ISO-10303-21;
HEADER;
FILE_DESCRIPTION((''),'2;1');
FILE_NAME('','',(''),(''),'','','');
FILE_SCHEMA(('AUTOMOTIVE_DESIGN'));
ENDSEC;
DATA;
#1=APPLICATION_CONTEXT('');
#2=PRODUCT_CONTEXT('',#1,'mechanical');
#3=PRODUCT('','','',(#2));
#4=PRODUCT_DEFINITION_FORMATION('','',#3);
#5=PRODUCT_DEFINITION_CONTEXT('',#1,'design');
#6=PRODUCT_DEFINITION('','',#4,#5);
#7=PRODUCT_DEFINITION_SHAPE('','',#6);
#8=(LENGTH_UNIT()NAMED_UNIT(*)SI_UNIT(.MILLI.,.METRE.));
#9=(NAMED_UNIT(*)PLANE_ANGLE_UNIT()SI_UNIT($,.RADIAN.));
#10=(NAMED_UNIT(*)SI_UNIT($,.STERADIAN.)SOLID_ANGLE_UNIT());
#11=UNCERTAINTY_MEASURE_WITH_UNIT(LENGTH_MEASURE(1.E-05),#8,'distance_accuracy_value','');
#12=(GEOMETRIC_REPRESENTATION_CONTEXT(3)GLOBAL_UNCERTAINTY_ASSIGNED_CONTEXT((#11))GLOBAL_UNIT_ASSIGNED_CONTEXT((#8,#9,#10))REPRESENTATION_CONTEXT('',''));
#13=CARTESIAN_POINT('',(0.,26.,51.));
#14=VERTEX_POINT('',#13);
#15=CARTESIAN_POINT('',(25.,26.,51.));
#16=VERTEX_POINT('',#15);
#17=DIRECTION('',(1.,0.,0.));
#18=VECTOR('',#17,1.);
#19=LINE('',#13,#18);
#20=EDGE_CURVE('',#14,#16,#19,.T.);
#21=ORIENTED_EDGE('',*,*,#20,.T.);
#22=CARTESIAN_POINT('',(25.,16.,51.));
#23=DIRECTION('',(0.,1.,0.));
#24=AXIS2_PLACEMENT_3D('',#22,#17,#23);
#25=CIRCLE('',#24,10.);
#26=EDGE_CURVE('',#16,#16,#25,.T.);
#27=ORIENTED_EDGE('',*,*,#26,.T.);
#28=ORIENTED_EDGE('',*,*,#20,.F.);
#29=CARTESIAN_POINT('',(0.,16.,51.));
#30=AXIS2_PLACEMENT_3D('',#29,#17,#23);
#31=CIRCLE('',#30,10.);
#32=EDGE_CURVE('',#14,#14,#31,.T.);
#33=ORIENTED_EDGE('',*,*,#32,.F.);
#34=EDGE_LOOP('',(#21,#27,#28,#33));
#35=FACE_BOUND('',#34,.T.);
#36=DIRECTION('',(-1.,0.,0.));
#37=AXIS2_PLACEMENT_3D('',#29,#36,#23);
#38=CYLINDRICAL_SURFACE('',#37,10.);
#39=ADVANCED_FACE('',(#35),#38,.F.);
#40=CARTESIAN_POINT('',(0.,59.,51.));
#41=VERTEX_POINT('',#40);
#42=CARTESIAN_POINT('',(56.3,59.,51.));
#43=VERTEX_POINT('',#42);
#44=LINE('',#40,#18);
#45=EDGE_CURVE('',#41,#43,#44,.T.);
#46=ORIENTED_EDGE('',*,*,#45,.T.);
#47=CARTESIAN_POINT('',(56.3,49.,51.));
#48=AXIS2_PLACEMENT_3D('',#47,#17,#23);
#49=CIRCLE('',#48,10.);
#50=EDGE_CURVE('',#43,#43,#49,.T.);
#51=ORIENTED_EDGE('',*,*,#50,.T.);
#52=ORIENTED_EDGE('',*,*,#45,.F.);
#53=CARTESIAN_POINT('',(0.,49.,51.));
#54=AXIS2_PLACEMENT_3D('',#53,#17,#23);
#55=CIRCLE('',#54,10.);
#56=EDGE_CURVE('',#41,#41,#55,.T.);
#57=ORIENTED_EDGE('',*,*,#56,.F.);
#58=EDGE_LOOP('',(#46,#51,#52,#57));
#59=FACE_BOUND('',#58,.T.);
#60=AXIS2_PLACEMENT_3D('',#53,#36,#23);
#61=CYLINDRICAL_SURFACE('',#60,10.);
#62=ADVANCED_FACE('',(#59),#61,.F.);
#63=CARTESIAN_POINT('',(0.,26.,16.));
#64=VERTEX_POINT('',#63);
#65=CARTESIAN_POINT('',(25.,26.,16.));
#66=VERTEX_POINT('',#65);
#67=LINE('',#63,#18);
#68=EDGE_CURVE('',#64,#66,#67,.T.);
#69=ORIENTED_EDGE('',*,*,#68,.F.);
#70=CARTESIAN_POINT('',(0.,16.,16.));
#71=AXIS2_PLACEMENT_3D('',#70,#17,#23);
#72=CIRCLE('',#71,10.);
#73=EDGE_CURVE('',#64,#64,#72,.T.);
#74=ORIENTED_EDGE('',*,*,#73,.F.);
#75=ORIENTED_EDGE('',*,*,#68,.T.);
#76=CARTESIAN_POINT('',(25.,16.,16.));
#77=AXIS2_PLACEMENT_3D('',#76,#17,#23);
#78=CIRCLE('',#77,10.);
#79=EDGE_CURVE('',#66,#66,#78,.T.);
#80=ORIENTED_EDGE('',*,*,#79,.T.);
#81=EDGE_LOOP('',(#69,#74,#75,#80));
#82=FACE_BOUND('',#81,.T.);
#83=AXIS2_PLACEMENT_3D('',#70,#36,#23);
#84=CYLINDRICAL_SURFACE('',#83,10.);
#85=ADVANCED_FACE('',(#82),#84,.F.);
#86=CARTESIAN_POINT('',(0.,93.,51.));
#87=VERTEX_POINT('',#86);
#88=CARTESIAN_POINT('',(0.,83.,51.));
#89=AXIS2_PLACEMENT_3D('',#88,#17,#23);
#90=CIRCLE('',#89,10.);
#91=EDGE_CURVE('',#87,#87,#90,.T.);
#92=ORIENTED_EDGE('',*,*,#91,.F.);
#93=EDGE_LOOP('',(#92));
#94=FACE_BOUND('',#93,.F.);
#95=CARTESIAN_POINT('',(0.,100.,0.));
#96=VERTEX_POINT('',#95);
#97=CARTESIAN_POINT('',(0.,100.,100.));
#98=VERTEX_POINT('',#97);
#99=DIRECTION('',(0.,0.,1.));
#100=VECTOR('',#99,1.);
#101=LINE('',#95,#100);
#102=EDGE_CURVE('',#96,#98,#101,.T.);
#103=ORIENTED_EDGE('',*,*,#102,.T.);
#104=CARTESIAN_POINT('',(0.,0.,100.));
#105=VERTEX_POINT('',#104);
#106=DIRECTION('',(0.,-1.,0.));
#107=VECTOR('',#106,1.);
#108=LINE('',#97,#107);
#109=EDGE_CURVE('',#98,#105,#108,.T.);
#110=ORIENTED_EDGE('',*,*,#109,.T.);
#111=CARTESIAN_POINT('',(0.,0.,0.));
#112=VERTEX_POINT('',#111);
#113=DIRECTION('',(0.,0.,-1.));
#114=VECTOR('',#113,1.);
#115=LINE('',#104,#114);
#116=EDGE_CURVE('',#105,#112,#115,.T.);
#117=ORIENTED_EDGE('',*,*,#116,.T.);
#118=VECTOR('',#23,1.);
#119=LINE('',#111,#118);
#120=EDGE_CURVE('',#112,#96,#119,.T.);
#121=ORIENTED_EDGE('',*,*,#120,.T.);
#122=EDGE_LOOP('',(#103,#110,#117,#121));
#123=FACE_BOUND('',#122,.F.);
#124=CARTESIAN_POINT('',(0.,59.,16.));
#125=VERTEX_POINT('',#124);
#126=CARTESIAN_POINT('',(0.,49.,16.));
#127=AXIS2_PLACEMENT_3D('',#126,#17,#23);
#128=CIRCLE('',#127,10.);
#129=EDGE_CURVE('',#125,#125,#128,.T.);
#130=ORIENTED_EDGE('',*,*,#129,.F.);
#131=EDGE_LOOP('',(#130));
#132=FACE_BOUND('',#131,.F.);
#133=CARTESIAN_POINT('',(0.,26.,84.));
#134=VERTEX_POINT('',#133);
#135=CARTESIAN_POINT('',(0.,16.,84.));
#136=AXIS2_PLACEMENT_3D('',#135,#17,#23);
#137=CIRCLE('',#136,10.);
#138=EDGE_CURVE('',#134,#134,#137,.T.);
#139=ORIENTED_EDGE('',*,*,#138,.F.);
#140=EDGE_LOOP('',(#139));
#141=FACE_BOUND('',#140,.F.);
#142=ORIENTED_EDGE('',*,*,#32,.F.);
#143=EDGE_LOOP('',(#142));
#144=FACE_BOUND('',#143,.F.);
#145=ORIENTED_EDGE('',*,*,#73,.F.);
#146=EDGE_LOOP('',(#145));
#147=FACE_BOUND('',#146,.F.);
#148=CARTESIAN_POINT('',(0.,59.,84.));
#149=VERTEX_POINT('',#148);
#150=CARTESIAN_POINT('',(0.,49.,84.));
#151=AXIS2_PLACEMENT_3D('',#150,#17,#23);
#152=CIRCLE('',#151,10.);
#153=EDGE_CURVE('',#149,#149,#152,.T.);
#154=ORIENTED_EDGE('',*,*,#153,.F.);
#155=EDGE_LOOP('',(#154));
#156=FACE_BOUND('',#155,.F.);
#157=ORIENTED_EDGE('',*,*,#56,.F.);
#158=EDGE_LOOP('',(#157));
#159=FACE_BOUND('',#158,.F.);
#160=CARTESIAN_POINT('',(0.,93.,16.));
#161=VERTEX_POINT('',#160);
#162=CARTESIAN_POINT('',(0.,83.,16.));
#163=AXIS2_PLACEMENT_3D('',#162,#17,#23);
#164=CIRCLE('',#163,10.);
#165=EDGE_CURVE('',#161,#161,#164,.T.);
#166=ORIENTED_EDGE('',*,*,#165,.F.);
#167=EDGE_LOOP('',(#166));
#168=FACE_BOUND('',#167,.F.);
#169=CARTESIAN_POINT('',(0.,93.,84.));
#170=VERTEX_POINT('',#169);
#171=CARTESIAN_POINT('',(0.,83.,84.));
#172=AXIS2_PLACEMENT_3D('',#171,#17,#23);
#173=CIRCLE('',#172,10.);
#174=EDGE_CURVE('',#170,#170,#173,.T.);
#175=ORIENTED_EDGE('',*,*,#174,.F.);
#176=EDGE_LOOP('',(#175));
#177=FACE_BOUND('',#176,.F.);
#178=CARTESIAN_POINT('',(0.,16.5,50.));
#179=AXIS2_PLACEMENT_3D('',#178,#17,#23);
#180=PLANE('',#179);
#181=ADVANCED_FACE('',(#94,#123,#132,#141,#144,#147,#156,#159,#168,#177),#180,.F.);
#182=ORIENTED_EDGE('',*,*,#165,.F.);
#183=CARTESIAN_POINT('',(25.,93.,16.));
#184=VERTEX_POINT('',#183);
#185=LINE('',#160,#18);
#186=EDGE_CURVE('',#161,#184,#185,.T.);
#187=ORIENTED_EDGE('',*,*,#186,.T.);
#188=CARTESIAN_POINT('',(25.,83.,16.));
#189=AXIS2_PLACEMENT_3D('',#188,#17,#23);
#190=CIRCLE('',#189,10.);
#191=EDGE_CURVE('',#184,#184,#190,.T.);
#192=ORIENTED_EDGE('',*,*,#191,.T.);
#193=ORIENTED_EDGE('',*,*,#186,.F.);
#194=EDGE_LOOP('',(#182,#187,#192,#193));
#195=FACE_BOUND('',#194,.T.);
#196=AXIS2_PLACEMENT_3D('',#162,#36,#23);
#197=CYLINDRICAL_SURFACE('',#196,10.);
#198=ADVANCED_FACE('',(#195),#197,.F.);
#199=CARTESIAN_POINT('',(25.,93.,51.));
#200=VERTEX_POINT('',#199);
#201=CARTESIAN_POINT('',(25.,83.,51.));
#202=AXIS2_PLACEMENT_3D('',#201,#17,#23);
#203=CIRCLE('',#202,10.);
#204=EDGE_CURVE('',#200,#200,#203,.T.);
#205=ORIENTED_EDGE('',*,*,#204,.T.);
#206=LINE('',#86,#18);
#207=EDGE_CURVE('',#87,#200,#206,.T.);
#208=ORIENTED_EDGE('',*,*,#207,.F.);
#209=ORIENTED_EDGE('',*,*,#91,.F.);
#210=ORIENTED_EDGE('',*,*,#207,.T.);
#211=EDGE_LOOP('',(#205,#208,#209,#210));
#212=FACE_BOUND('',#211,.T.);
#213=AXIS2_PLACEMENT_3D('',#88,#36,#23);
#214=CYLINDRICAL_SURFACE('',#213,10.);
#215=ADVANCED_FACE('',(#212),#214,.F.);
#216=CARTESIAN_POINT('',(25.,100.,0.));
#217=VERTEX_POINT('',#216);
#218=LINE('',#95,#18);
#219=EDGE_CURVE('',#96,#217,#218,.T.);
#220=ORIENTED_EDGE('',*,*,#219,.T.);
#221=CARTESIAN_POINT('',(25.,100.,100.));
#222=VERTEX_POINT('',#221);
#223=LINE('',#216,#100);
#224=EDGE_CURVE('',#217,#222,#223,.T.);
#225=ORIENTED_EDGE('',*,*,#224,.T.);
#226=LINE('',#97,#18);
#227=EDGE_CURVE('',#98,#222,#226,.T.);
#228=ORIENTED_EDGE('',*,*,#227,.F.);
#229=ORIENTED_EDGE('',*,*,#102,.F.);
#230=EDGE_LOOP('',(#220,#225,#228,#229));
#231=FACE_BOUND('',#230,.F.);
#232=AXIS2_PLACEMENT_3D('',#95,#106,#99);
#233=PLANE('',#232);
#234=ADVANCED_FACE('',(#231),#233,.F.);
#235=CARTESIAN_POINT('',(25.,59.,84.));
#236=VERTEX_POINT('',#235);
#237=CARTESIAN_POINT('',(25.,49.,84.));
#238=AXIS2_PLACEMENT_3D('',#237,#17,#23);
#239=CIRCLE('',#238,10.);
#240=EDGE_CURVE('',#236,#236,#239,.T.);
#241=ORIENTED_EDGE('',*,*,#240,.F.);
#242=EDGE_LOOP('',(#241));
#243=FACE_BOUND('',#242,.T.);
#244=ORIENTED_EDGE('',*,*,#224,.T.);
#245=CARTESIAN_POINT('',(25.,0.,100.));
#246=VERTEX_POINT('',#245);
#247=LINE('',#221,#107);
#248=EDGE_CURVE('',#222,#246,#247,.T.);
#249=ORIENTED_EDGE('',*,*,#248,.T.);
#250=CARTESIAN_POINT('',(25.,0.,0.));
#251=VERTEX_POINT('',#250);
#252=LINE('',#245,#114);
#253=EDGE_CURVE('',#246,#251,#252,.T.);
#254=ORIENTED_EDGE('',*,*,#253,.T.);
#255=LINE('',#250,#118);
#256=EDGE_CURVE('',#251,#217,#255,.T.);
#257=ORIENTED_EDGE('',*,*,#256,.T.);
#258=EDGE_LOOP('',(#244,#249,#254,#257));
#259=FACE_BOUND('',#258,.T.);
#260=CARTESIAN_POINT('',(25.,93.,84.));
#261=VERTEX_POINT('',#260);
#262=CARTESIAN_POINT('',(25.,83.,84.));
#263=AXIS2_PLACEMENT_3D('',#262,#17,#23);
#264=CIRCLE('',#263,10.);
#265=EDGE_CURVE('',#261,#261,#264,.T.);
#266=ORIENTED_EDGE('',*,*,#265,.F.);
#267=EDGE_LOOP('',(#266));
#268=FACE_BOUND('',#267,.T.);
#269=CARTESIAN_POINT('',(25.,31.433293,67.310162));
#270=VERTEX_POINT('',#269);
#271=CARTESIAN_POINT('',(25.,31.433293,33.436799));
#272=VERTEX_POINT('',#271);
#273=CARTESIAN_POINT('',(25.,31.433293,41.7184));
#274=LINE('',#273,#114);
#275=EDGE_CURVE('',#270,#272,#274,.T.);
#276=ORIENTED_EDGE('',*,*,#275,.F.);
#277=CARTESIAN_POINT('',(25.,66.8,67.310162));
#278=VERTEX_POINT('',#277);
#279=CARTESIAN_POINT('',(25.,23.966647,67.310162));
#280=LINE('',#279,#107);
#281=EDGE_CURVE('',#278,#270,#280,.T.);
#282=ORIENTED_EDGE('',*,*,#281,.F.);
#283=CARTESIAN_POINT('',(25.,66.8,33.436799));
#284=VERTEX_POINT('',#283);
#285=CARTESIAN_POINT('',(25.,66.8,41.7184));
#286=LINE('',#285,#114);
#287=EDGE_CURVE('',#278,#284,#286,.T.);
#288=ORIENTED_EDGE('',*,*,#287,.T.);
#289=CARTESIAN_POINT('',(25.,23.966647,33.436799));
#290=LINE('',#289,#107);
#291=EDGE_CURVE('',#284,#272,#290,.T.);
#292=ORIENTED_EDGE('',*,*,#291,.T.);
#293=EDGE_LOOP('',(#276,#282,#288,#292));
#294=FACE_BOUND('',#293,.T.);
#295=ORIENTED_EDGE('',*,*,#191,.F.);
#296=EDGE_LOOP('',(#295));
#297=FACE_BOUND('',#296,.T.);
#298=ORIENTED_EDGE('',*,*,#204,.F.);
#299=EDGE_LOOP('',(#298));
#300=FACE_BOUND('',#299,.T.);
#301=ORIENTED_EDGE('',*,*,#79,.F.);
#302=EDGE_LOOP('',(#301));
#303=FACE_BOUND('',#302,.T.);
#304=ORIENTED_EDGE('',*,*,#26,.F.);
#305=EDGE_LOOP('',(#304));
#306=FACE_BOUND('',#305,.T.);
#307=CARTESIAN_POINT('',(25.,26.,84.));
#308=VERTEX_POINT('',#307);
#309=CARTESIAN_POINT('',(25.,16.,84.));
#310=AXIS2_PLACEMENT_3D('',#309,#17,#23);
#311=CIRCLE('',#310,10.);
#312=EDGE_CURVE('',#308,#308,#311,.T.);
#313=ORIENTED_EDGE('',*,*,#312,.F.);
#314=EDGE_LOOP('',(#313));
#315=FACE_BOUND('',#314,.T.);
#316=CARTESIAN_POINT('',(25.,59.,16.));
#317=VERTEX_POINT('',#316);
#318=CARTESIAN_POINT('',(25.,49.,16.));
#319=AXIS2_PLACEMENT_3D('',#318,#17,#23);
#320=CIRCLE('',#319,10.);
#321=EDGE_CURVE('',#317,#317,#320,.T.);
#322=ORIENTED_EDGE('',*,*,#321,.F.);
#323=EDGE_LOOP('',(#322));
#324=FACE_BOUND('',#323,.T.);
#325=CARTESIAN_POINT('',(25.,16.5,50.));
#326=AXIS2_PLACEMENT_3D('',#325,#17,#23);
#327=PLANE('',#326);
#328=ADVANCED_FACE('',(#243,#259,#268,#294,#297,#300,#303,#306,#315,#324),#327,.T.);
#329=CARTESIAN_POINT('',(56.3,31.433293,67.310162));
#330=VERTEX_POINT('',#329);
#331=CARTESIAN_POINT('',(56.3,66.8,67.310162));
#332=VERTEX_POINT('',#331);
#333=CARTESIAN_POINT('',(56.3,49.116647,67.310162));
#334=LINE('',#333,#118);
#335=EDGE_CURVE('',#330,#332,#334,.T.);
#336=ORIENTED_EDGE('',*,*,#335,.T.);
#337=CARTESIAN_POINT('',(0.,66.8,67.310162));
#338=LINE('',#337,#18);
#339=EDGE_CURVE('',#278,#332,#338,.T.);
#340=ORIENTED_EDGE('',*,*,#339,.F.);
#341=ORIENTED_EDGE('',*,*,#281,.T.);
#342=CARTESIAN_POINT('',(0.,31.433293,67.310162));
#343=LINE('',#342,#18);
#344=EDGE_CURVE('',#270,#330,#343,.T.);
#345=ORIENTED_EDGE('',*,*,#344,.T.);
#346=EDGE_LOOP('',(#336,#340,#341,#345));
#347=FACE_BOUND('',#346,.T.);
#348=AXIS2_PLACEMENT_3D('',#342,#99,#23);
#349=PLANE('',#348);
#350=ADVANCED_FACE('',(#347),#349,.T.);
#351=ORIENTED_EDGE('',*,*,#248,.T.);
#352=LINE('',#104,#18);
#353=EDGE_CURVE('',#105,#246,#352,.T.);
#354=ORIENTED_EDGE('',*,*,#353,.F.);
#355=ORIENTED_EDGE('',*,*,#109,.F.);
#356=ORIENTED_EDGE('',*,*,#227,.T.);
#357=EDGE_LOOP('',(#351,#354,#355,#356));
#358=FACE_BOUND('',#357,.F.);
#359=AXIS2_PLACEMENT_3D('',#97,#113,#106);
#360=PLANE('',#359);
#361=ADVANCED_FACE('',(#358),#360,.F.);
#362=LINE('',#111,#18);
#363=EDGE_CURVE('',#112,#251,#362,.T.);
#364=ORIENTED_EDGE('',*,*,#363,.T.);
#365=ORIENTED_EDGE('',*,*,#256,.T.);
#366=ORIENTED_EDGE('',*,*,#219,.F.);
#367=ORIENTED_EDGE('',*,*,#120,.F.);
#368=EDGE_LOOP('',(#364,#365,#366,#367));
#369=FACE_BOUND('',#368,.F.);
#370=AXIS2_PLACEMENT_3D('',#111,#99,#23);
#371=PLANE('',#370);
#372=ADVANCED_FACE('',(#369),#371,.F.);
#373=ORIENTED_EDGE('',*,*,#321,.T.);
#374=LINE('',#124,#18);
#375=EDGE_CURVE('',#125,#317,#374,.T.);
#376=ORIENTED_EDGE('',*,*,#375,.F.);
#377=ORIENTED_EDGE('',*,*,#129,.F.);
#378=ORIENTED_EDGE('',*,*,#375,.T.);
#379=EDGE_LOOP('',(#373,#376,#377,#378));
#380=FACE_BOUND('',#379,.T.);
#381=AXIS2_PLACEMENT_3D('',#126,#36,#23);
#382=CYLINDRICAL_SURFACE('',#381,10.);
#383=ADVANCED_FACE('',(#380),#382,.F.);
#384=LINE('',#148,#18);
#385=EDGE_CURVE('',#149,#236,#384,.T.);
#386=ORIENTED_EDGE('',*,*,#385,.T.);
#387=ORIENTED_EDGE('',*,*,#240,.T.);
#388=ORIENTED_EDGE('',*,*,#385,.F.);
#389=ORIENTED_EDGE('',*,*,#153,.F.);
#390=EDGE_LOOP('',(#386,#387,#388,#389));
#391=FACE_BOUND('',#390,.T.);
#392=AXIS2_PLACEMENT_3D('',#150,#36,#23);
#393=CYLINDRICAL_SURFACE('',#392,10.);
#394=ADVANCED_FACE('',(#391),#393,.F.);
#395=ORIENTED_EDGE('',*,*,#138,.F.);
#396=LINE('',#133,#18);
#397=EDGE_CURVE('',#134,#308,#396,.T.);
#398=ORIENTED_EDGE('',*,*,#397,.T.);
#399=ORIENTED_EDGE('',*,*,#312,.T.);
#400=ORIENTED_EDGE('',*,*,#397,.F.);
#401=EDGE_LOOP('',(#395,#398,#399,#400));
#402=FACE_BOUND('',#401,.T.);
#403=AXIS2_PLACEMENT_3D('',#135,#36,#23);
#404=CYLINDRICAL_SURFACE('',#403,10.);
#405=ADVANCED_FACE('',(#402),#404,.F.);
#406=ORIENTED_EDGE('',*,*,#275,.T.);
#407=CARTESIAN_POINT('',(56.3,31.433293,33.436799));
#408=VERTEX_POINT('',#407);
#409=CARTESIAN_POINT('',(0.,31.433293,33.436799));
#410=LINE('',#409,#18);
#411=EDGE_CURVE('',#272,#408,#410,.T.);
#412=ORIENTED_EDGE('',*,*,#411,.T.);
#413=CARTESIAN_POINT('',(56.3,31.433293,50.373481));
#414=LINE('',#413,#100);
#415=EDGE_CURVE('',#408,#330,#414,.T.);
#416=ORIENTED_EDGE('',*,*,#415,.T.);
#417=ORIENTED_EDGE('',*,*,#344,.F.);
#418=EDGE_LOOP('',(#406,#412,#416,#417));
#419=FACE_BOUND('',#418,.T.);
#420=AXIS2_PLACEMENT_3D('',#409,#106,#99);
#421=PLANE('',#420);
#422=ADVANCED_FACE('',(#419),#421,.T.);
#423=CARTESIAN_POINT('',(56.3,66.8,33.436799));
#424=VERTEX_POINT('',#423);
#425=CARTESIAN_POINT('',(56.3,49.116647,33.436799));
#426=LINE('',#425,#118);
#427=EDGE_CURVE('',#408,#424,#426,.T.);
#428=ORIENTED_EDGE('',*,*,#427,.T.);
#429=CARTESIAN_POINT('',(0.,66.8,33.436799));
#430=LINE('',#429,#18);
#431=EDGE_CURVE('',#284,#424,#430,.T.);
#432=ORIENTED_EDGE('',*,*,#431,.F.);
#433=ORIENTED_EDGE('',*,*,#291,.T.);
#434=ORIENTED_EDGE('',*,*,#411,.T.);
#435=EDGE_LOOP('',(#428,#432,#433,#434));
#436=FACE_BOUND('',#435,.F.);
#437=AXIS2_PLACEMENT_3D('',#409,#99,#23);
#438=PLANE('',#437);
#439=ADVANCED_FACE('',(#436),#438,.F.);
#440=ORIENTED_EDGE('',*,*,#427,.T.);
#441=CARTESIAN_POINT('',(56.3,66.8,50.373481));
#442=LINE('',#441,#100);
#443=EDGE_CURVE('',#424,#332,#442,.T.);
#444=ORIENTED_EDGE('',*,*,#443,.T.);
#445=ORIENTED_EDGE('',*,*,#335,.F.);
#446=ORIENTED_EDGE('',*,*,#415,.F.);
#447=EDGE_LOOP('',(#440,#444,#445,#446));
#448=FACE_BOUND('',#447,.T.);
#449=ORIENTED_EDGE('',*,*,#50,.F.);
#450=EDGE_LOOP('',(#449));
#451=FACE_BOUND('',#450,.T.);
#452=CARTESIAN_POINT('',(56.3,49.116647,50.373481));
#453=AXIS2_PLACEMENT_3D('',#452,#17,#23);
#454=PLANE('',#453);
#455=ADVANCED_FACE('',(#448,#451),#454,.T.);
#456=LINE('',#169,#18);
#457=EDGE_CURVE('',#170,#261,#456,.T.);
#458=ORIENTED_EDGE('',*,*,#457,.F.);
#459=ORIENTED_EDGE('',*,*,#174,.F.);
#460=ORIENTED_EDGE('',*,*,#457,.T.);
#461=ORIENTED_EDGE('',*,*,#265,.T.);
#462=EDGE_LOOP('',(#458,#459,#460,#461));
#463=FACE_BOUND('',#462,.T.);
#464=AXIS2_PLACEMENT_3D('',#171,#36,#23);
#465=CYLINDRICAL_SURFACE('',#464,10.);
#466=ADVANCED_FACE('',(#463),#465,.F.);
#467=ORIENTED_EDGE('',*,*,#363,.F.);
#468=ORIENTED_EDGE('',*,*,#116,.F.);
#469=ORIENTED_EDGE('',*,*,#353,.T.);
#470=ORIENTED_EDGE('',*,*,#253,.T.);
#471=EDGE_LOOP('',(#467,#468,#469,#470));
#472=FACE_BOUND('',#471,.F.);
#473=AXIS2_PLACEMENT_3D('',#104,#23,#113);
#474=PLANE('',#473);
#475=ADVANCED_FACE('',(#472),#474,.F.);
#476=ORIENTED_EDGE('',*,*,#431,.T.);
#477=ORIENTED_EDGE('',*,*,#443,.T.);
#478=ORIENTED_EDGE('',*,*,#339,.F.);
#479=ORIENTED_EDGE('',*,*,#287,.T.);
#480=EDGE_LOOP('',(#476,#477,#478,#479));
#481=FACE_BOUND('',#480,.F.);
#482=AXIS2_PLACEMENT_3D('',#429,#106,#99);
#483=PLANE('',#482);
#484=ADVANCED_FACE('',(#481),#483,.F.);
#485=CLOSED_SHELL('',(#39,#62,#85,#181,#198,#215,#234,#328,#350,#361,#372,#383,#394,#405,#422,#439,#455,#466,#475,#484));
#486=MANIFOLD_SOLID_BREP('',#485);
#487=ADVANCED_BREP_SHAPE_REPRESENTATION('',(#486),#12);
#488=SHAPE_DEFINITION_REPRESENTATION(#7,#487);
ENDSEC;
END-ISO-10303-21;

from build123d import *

# Parameters (mm, degrees)
F0_W     = 33
F0_H     = 34
F0_R     = 10
F0_H_2   = 33
F0_W_2   = 34
F1_DEPTH = 25
F2_W     = 35.366706574
F2_H     = 33.8733626366
F2_W_2   = 35.166706574
F2_H_2   = 33.6733626366
F2_R     = 10
F3_DEPTH = 56.3


# Not quite as in the source:
# - a feature names something its author has since deleted; it is built from what else it names


with BuildPart() as f1:
    # F0 (on Right) → F1 (new body)
    with BuildSketch(Plane.YZ):
        with Locations((16.5, 50)):
            Rectangle(F0_W, F0_H)
        with Locations((16, 51)):
            Circle(F0_R, mode=Mode.SUBTRACT)
        with Locations((16.5, 83.5)):
            Rectangle(F0_W, F0_H_2)
        with Locations((16, 84)):
            Circle(F0_R, mode=Mode.SUBTRACT)
        with Locations((50, 83.5)):
            Rectangle(F0_W_2, F0_H_2)
        with Locations((49, 84)):
            Circle(F0_R, mode=Mode.SUBTRACT)
        with Locations((16.5, 16.5)):
            Rectangle(F0_W, F0_H_2)
        with Locations((16, 16)):
            Circle(F0_R, mode=Mode.SUBTRACT)
        with Locations((50, 50)):
            Rectangle(F0_W_2, F0_H)
        with Locations((49, 51)):
            Circle(F0_R, mode=Mode.SUBTRACT)
        with Locations((50, 16.5)):
            Rectangle(F0_W_2, F0_H_2)
        with Locations((49, 16)):
            Circle(F0_R, mode=Mode.SUBTRACT)
        with Locations((83.5, 16.5)):
            Rectangle(F0_W, F0_H_2)
        with Locations((83, 16)):
            Circle(F0_R, mode=Mode.SUBTRACT)
        with Locations((83.5, 50)):
            Rectangle(F0_W, F0_H)
        with Locations((83, 51)):
            Circle(F0_R, mode=Mode.SUBTRACT)
        with Locations((83.5, 83.5)):
            Rectangle(F0_W, F0_H_2)
        with Locations((83, 84)):
            Circle(F0_R, mode=Mode.SUBTRACT)
    extrude(amount=F1_DEPTH)

    # F2 (on Right) → F3 (join)
    with BuildSketch(Plane.YZ):
        with Locations((49.116646713, 50.3734805703)):
            Rectangle(F2_W, F2_H)
        with Locations((49.116646713, 50.3734805703)):
            Rectangle(F2_W_2, F2_H_2, mode=Mode.SUBTRACT)
        with Locations((49.116646713, 50.3734805703)):
            Rectangle(F2_W_2, F2_H_2)
        with Locations((49, 51)):
            Circle(F2_R, mode=Mode.SUBTRACT)
    extrude(amount=F3_DEPTH)


solid = f1.part
